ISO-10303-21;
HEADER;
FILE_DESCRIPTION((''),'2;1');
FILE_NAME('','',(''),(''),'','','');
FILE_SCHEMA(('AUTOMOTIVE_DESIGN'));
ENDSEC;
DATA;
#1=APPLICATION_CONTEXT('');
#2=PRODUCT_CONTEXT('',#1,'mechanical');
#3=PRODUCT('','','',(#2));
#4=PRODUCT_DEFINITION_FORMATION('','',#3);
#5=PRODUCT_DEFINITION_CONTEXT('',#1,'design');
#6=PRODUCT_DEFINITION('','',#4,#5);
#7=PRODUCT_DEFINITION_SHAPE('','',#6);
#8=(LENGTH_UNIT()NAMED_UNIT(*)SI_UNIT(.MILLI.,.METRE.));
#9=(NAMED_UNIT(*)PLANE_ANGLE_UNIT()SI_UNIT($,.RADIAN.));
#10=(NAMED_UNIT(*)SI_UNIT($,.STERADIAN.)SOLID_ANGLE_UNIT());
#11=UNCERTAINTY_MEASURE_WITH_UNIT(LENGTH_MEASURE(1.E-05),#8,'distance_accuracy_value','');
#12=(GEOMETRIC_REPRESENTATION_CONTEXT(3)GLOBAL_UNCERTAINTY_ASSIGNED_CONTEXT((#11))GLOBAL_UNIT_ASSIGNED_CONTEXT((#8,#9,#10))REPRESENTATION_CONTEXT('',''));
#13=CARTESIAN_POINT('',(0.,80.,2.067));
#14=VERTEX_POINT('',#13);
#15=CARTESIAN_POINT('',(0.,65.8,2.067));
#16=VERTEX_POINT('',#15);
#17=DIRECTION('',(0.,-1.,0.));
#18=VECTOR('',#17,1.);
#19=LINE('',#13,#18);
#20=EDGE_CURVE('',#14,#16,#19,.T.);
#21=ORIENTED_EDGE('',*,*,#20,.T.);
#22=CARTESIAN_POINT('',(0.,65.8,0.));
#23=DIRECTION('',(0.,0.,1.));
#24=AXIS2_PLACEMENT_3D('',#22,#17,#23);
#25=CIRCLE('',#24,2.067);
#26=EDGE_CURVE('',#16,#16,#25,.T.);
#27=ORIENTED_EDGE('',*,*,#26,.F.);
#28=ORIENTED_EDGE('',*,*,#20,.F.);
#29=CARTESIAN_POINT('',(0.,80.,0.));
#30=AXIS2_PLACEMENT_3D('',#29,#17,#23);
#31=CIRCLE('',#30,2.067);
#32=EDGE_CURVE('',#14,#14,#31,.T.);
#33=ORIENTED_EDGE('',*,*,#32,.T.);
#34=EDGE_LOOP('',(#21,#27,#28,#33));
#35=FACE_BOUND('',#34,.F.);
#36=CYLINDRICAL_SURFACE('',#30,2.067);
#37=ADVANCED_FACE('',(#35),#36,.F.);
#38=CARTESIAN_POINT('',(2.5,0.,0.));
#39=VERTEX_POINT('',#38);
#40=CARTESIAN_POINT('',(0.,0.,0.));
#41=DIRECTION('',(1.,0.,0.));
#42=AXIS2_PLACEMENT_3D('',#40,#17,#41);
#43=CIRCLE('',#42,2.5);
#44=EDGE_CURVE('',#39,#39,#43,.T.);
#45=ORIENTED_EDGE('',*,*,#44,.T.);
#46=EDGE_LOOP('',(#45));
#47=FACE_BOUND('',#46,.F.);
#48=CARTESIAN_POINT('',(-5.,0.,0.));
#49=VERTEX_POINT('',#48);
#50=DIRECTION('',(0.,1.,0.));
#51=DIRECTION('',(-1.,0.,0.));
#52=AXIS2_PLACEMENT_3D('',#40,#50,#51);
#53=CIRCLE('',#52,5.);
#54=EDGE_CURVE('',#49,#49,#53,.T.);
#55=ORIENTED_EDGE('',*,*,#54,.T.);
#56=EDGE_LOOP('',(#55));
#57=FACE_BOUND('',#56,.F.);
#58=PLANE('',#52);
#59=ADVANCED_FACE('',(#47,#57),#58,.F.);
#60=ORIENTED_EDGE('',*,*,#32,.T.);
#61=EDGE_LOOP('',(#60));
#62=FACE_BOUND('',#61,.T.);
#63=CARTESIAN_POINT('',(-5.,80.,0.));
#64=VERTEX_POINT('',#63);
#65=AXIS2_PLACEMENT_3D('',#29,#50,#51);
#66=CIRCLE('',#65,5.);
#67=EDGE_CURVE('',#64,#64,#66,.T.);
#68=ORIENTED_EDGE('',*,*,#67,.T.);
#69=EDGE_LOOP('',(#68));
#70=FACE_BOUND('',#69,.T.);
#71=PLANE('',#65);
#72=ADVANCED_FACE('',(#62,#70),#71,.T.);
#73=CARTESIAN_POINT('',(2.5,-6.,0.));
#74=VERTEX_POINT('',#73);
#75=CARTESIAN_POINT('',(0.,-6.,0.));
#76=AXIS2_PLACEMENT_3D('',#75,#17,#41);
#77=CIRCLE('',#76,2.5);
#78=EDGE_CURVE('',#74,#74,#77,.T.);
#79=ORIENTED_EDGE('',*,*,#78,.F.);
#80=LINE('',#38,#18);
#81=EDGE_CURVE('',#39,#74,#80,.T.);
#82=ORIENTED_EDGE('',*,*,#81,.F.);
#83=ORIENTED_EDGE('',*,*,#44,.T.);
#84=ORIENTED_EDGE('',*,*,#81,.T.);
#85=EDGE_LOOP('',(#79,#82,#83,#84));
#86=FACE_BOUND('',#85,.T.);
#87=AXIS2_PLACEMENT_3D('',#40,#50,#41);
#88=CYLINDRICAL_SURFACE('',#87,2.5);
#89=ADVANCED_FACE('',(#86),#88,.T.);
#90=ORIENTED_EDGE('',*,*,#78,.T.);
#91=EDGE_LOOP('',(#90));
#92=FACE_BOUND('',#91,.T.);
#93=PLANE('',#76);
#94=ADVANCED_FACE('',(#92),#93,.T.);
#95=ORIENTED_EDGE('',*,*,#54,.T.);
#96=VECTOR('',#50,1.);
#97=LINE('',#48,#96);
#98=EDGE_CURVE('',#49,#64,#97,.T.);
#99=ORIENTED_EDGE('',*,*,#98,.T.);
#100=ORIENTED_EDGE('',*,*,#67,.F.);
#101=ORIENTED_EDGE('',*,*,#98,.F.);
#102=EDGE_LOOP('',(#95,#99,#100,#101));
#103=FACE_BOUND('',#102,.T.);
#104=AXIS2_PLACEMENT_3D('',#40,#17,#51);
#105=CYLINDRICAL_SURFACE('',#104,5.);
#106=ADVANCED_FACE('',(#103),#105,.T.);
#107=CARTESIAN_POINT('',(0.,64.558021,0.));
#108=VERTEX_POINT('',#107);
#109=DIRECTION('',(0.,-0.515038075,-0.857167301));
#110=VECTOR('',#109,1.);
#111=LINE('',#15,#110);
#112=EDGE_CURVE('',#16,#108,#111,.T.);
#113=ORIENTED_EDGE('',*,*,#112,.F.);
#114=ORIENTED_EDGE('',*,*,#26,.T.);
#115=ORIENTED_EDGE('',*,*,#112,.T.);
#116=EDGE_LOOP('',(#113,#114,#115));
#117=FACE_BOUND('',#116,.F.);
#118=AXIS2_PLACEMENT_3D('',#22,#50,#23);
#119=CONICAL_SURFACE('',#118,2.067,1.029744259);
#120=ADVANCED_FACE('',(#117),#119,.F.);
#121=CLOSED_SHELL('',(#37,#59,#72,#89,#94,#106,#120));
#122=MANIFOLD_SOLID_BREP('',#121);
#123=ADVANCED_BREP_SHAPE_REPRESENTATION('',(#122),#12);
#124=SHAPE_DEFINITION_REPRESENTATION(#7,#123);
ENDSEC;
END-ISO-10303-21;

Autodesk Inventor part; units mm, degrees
ref_plane "YZ Plane" through (0, 0, 0) normal (1, 0, 0) x (0, 1, 0)
ref_plane "XZ Plane" through (0, 0, 0) normal (0, 1, 0) x (-1, 0, 0)
ref_plane "XY Plane" through (0, 0, 0) normal (0, 0, 1) x (1, 0, 0)
sketch "Esboço1" plane through (0, 0, 0) normal (0, 1, 0) x (-1, 0, 0)
  circle A0 centre (0, 0) radius 5
  dimension "d0" = 10
extrude "Extrusão1" add sketch "Esboço1" along normal blind 80
sketch "Esboço3" plane through (0, 0, 0) normal (0, -1, 0) x (1, 0, 0)
  circle A0 centre (0, 0) radius 2.5
  dimension "d9" = 5
extrude "Extrusão3" add sketch "Esboço3" along normal blind 6
thread "Rosca2" size "M5x0.8" class "6g" standard "ANSI Metric M Profile" length 15
sketch "Sketch4" plane through (0, 80, 0) normal (0, 1, 0) x (1, 0, 0)
  circle A0 centre (0, 0) radius 5 projected
hole "Hole1" at (0, 80, 0) direction (0, -1, 0) diameter 4.134 depth 14.2 tip angle 118 thread size "M5x0.8" class "6H" standard "ISO Metric profile"
equation "\"Raio_vergadura\" = Espessura"
equation "\"Largura_alívio_de_vergadura\" = Espessura"
equation "\"Profundidade_alívio_de_vergadura\" = 0.5 * Espessura"
equation "\"Tamanho_alívio_de_dobra\" = 4 * Espessura"
equation "\"Remanescente_mínimo\" = 2 * Espessura"
equation "\"Raiodetransição\" = Raio_vergadura"
equation "\"Tamanho_de_raio_de_Jacobi\" = Raio_vergadura"
equation "\"TamanhoFolga\" = Espessura"
equation "\"Espessura\" = 0.5"
properties part number "Suporte da mesa" material "Brass, Soft Yellow"
